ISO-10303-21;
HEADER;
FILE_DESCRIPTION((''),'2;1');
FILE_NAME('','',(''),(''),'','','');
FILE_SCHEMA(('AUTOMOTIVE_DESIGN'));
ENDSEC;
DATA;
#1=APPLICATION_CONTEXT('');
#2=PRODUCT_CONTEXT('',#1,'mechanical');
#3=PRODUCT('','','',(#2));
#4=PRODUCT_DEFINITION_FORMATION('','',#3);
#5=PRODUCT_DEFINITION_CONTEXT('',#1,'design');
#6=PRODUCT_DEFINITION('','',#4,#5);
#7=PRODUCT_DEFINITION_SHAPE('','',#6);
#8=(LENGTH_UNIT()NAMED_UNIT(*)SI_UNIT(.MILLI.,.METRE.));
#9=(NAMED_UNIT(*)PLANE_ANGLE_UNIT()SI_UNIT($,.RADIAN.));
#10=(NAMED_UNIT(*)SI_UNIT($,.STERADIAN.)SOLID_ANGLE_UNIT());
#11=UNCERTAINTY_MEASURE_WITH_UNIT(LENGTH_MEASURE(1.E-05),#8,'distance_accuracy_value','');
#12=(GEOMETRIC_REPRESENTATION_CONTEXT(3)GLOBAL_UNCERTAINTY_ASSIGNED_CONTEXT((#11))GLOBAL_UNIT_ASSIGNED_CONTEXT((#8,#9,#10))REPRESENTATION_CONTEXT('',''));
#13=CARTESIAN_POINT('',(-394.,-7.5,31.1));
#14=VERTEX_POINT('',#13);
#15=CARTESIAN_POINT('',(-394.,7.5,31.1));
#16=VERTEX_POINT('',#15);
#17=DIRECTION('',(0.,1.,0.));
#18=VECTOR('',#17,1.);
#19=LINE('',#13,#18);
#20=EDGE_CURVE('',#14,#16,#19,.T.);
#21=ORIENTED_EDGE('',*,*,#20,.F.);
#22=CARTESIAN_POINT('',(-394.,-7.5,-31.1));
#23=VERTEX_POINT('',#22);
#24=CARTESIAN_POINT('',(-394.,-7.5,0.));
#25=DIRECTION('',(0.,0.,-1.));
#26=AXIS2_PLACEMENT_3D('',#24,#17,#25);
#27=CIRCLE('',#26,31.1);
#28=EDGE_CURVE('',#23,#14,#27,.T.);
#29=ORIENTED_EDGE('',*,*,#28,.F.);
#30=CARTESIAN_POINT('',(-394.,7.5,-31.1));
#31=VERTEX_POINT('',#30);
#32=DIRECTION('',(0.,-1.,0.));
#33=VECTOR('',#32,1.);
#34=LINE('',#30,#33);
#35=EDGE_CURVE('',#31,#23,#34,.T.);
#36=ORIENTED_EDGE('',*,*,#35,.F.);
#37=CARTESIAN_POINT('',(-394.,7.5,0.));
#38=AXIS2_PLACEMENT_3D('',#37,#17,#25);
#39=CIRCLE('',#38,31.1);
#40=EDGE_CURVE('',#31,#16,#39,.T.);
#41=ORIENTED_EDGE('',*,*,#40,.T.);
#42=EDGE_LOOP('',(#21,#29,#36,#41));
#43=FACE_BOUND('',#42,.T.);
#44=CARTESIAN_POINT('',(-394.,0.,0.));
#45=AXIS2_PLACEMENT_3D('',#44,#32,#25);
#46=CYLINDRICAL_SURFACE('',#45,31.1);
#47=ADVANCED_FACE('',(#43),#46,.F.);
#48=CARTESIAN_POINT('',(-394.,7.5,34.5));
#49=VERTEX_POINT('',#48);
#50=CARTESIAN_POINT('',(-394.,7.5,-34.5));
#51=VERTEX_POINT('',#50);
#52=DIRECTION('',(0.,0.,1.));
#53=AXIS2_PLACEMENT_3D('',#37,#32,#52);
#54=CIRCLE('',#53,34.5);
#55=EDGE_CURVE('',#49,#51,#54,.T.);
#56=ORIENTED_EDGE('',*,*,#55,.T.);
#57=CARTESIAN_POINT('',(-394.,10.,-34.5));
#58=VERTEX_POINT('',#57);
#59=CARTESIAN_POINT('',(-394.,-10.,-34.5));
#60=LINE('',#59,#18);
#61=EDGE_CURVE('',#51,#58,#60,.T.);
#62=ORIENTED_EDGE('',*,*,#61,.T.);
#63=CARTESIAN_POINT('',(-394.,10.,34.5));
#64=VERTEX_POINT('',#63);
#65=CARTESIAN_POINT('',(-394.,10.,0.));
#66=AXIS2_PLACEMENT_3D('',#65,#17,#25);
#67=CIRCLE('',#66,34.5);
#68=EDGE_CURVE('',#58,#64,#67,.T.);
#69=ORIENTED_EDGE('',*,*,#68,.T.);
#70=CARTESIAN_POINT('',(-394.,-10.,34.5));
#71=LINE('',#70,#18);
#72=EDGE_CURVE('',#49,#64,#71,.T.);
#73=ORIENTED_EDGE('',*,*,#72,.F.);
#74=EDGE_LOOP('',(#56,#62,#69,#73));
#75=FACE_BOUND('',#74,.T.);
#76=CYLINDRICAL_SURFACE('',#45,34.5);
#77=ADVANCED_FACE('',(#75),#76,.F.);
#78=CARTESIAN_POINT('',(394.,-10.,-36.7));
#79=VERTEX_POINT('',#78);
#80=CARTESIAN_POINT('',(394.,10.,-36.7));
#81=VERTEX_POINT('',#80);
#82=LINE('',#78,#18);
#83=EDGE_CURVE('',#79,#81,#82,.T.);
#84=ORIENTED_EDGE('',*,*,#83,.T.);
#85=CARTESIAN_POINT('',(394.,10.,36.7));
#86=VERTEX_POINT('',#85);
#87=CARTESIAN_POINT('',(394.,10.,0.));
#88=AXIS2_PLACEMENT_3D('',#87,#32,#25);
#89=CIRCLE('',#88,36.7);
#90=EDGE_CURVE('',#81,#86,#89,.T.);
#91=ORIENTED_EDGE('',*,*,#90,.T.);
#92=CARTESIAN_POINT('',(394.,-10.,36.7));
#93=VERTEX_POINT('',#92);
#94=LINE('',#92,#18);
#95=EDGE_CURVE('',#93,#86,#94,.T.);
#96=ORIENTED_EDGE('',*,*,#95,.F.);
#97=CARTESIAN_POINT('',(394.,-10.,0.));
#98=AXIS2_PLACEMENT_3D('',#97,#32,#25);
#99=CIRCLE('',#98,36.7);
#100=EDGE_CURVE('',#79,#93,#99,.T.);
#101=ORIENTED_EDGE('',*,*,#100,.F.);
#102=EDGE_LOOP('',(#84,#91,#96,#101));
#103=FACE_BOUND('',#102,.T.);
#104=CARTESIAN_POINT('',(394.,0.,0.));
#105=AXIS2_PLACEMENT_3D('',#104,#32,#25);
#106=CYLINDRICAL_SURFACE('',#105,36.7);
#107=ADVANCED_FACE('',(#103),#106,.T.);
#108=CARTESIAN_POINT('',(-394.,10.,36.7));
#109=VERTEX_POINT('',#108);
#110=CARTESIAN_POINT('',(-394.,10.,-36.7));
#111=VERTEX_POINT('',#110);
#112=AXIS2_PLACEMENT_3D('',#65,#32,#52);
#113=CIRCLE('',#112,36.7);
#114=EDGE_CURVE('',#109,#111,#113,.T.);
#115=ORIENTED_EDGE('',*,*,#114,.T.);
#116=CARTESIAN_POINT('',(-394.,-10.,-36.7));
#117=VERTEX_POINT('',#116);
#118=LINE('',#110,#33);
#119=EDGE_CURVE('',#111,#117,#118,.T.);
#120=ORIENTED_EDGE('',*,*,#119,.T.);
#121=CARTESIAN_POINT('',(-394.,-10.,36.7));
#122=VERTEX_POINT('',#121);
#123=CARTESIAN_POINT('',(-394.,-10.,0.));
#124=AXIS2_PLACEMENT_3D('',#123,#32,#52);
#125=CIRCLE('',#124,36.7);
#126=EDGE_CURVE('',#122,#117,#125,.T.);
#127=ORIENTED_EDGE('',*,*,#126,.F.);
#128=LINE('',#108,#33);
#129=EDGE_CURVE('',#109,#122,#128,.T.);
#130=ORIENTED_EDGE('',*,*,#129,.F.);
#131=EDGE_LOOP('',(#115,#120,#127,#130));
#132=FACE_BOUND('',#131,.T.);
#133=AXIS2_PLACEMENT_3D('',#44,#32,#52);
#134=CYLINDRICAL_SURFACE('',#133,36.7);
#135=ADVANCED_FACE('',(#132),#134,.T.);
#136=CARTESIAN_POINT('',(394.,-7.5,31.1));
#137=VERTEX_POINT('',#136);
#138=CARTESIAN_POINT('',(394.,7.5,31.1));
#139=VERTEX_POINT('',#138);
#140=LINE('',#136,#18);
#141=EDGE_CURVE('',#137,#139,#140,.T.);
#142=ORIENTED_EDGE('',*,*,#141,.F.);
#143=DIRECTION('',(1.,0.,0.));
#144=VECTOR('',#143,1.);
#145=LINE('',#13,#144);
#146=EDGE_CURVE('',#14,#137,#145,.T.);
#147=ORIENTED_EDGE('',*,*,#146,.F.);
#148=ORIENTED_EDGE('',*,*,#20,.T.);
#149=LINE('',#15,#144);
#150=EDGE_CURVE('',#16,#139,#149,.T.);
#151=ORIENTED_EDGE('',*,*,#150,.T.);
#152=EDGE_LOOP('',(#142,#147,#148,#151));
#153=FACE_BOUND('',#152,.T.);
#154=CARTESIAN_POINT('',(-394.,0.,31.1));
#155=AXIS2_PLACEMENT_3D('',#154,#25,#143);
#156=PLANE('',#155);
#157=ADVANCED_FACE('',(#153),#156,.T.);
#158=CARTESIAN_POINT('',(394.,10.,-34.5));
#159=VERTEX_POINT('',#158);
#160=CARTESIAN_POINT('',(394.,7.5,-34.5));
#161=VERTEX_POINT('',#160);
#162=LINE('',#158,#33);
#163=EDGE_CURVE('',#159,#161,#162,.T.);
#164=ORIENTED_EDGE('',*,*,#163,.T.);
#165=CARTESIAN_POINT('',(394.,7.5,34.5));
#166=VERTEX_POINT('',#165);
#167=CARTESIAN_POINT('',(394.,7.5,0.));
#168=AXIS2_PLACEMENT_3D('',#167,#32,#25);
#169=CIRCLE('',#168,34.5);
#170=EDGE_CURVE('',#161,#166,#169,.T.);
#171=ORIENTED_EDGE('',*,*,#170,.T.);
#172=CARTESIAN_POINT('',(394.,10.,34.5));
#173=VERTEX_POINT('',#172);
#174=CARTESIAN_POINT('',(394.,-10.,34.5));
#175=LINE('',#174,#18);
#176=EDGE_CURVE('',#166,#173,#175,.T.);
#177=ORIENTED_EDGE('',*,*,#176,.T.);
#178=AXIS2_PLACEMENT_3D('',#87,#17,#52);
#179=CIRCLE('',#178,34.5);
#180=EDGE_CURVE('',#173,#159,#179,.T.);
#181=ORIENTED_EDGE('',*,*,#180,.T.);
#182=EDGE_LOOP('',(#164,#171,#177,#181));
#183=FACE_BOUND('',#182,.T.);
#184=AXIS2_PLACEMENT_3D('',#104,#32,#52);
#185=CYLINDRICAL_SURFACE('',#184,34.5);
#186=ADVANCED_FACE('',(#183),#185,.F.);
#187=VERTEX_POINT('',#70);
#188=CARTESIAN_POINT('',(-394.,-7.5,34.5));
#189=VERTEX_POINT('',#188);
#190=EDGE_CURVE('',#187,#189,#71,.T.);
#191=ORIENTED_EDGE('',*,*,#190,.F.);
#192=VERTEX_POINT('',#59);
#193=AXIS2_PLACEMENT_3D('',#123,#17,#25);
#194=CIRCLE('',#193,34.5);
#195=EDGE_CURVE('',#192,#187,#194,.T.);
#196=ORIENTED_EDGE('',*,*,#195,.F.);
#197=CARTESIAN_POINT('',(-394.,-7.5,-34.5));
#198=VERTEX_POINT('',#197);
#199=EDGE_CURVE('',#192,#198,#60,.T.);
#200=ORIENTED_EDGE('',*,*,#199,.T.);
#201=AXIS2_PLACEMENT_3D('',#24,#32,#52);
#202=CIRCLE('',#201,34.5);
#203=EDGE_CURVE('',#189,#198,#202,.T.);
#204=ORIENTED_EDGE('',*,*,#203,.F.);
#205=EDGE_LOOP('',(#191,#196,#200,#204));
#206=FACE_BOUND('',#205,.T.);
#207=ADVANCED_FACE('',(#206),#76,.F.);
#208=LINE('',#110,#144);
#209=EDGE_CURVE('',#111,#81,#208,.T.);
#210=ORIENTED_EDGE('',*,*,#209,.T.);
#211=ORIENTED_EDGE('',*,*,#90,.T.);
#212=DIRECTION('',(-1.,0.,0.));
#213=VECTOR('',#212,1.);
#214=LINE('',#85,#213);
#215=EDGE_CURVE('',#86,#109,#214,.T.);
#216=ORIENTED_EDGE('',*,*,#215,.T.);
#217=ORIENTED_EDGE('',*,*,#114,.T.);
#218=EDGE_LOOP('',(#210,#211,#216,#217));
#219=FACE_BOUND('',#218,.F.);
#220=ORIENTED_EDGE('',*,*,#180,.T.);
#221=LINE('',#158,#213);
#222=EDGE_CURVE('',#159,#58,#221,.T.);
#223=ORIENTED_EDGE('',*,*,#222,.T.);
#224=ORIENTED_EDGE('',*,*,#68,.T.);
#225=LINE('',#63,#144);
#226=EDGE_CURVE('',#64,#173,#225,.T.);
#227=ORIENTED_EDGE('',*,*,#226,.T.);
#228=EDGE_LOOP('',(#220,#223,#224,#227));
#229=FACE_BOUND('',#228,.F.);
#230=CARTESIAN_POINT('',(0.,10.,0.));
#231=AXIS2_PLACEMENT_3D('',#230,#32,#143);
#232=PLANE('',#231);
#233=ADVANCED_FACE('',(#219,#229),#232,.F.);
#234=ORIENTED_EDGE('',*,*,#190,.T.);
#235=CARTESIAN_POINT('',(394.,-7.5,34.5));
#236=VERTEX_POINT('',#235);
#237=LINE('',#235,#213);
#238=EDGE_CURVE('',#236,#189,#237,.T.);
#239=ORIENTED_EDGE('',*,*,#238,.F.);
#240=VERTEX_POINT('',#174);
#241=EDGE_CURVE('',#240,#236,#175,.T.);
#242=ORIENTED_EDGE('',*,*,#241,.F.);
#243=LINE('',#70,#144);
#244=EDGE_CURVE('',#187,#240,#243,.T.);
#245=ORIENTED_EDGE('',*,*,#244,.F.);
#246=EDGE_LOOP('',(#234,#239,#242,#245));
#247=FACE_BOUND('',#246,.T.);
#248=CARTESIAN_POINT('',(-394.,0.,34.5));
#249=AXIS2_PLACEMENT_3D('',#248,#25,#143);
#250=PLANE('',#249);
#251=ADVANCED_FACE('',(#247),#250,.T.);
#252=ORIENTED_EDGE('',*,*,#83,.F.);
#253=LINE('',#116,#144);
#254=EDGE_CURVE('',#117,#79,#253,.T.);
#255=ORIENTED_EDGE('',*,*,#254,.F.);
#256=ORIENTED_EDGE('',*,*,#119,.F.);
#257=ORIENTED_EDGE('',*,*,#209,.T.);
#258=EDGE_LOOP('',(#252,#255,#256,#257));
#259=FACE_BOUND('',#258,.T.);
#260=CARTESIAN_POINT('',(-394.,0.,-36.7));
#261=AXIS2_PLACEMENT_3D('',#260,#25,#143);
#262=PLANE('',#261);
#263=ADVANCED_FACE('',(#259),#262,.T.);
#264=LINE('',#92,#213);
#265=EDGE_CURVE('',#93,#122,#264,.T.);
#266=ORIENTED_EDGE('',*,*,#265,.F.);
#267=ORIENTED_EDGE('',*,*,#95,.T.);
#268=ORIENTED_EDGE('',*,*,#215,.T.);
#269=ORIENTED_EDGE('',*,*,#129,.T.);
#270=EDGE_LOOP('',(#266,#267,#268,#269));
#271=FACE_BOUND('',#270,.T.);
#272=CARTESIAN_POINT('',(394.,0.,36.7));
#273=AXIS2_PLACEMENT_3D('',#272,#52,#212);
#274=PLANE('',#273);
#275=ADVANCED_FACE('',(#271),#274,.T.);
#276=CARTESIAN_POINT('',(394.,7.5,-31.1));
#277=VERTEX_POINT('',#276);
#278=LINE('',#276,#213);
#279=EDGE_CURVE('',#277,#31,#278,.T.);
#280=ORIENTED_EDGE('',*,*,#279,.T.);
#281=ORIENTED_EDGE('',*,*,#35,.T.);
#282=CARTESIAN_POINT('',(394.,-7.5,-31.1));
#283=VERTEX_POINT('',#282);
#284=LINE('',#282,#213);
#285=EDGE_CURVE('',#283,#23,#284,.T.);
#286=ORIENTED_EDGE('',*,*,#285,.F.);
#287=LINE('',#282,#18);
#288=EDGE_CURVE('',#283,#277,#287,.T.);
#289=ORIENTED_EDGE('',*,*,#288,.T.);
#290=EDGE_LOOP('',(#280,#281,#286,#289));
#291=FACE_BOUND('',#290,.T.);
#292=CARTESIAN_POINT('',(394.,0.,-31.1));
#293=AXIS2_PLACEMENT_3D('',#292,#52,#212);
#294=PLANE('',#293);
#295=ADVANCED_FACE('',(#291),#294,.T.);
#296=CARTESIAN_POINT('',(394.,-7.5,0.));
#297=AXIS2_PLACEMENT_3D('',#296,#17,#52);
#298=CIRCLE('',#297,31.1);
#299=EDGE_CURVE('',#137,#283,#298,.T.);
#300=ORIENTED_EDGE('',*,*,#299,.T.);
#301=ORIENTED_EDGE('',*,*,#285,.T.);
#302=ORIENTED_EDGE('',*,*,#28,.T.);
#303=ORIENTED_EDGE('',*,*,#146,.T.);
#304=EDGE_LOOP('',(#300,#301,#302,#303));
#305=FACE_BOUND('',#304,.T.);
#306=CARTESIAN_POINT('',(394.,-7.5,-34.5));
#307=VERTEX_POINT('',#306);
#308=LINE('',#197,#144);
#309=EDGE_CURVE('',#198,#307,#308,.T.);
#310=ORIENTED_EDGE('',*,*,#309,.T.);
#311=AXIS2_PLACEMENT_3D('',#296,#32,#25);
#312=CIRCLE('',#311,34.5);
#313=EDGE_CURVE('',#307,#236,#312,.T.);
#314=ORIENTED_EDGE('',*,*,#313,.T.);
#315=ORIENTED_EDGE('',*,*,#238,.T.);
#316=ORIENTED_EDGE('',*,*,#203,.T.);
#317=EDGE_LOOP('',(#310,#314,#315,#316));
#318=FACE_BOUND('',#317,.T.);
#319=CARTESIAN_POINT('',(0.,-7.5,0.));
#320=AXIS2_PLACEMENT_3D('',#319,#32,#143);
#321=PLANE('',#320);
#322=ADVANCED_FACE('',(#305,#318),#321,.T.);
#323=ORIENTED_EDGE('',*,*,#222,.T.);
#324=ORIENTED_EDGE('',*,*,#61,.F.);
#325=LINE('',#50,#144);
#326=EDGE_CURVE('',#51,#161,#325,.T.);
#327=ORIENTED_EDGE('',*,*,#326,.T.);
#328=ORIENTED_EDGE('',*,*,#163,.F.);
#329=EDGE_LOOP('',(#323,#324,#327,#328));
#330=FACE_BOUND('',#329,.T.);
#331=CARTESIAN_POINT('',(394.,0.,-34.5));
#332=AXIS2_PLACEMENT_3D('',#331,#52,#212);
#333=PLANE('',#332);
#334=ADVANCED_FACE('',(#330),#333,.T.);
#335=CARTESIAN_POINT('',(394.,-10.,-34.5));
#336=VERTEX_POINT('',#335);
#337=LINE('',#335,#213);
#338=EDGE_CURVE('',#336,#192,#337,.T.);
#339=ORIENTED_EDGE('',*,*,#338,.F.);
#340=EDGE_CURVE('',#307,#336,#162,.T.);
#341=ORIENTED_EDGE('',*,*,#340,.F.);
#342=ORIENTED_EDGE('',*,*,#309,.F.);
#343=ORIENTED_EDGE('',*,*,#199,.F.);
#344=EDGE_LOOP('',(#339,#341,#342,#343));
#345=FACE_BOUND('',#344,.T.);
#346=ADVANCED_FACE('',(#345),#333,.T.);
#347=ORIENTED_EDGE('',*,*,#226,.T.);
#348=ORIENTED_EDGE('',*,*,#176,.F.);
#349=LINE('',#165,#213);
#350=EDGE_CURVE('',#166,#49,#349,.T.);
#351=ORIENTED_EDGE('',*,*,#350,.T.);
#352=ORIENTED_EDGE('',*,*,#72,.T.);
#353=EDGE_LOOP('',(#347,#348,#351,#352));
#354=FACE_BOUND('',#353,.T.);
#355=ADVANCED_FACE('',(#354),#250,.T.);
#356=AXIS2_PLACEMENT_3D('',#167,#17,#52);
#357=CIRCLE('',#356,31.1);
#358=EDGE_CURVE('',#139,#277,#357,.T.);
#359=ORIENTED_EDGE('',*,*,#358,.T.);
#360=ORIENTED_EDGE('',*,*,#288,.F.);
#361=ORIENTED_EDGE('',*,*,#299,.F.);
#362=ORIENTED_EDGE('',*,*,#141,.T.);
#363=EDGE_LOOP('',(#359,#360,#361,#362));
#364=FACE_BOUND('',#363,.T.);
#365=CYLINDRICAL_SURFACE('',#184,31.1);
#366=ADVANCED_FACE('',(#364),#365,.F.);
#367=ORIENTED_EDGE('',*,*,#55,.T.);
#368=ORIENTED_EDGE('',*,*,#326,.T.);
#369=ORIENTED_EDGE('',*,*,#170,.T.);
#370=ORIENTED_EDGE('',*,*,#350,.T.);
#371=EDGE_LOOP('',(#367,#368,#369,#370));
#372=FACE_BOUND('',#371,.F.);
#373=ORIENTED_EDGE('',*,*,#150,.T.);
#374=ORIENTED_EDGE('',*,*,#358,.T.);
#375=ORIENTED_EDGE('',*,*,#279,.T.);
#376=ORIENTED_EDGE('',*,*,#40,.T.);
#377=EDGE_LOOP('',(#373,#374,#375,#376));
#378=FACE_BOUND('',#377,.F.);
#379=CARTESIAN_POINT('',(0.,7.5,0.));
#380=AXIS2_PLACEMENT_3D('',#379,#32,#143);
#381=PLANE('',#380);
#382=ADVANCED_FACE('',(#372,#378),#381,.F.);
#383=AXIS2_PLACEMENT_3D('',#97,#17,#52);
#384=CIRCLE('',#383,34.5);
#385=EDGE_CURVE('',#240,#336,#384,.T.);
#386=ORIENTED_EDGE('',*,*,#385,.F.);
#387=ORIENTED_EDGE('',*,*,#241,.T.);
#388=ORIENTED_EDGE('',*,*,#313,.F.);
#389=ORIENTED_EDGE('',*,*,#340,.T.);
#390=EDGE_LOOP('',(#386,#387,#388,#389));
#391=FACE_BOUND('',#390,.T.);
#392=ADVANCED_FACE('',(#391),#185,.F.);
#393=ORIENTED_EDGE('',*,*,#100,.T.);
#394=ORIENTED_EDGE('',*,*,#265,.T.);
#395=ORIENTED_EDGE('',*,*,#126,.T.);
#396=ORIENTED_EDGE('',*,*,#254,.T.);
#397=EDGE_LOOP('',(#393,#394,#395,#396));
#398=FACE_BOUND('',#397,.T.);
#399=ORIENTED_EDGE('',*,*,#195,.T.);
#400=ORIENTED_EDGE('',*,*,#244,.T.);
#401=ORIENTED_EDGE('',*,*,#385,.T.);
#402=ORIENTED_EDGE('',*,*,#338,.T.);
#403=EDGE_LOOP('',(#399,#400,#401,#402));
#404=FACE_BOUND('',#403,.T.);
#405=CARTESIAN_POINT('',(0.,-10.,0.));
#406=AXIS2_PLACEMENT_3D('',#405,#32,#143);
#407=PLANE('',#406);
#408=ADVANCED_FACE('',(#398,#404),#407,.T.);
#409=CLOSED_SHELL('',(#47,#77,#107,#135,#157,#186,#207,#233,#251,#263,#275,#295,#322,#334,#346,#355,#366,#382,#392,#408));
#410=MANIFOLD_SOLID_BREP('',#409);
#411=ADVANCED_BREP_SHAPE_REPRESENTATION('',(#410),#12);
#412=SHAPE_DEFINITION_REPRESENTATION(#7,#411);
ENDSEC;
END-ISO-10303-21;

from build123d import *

# Parameters (mm, degrees)
F1_DEPTH = 10
F3_DEPTH = 7.5


with BuildPart() as f1:
    # F0 (on Front) → F1 (new body, symmetric)
    with BuildSketch(Plane.XZ):
        with BuildLine():
            Line((394, 36.7), (-394, 36.7))
            ThreePointArc((-394, 36.7), (-430.7, 0), (-394, -36.7))
            Line((-394, -36.7), (394, -36.7))
            ThreePointArc((394, -36.7), (430.7, 0), (394, 36.7))
        make_face()
        with BuildLine():
            Line((394, -34.5), (-394, -34.5))
            ThreePointArc((-394, -34.5), (-428.5, 0), (-394, 34.5))
            Line((-394, 34.5), (394, 34.5))
            ThreePointArc((394, 34.5), (428.5, 0), (394, -34.5))
        make_face(mode=Mode.SUBTRACT)
    extrude(amount=F1_DEPTH, both=True)

    # F2 (on Front) → F3 (join, symmetric)
    with BuildSketch(Plane.XZ):
        with BuildLine():
            Line((394, 34.5), (-394, 34.5))
            ThreePointArc((-394, 34.5), (-428.5, 0), (-394, -34.5))
            Line((-394, -34.5), (394, -34.5))
            ThreePointArc((394, -34.5), (428.5, 0), (394, 34.5))
        make_face()
        with BuildLine():
            ThreePointArc((-394, -31.1), (-425.1, 0), (-394, 31.1))
            Line((-394, 31.1), (394, 31.1))
            ThreePointArc((394, 31.1), (425.1, 0), (394, -31.1))
            Line((394, -31.1), (-394, -31.1))
        make_face(mode=Mode.SUBTRACT)
    extrude(amount=F3_DEPTH, both=True)


solid = f1.part
